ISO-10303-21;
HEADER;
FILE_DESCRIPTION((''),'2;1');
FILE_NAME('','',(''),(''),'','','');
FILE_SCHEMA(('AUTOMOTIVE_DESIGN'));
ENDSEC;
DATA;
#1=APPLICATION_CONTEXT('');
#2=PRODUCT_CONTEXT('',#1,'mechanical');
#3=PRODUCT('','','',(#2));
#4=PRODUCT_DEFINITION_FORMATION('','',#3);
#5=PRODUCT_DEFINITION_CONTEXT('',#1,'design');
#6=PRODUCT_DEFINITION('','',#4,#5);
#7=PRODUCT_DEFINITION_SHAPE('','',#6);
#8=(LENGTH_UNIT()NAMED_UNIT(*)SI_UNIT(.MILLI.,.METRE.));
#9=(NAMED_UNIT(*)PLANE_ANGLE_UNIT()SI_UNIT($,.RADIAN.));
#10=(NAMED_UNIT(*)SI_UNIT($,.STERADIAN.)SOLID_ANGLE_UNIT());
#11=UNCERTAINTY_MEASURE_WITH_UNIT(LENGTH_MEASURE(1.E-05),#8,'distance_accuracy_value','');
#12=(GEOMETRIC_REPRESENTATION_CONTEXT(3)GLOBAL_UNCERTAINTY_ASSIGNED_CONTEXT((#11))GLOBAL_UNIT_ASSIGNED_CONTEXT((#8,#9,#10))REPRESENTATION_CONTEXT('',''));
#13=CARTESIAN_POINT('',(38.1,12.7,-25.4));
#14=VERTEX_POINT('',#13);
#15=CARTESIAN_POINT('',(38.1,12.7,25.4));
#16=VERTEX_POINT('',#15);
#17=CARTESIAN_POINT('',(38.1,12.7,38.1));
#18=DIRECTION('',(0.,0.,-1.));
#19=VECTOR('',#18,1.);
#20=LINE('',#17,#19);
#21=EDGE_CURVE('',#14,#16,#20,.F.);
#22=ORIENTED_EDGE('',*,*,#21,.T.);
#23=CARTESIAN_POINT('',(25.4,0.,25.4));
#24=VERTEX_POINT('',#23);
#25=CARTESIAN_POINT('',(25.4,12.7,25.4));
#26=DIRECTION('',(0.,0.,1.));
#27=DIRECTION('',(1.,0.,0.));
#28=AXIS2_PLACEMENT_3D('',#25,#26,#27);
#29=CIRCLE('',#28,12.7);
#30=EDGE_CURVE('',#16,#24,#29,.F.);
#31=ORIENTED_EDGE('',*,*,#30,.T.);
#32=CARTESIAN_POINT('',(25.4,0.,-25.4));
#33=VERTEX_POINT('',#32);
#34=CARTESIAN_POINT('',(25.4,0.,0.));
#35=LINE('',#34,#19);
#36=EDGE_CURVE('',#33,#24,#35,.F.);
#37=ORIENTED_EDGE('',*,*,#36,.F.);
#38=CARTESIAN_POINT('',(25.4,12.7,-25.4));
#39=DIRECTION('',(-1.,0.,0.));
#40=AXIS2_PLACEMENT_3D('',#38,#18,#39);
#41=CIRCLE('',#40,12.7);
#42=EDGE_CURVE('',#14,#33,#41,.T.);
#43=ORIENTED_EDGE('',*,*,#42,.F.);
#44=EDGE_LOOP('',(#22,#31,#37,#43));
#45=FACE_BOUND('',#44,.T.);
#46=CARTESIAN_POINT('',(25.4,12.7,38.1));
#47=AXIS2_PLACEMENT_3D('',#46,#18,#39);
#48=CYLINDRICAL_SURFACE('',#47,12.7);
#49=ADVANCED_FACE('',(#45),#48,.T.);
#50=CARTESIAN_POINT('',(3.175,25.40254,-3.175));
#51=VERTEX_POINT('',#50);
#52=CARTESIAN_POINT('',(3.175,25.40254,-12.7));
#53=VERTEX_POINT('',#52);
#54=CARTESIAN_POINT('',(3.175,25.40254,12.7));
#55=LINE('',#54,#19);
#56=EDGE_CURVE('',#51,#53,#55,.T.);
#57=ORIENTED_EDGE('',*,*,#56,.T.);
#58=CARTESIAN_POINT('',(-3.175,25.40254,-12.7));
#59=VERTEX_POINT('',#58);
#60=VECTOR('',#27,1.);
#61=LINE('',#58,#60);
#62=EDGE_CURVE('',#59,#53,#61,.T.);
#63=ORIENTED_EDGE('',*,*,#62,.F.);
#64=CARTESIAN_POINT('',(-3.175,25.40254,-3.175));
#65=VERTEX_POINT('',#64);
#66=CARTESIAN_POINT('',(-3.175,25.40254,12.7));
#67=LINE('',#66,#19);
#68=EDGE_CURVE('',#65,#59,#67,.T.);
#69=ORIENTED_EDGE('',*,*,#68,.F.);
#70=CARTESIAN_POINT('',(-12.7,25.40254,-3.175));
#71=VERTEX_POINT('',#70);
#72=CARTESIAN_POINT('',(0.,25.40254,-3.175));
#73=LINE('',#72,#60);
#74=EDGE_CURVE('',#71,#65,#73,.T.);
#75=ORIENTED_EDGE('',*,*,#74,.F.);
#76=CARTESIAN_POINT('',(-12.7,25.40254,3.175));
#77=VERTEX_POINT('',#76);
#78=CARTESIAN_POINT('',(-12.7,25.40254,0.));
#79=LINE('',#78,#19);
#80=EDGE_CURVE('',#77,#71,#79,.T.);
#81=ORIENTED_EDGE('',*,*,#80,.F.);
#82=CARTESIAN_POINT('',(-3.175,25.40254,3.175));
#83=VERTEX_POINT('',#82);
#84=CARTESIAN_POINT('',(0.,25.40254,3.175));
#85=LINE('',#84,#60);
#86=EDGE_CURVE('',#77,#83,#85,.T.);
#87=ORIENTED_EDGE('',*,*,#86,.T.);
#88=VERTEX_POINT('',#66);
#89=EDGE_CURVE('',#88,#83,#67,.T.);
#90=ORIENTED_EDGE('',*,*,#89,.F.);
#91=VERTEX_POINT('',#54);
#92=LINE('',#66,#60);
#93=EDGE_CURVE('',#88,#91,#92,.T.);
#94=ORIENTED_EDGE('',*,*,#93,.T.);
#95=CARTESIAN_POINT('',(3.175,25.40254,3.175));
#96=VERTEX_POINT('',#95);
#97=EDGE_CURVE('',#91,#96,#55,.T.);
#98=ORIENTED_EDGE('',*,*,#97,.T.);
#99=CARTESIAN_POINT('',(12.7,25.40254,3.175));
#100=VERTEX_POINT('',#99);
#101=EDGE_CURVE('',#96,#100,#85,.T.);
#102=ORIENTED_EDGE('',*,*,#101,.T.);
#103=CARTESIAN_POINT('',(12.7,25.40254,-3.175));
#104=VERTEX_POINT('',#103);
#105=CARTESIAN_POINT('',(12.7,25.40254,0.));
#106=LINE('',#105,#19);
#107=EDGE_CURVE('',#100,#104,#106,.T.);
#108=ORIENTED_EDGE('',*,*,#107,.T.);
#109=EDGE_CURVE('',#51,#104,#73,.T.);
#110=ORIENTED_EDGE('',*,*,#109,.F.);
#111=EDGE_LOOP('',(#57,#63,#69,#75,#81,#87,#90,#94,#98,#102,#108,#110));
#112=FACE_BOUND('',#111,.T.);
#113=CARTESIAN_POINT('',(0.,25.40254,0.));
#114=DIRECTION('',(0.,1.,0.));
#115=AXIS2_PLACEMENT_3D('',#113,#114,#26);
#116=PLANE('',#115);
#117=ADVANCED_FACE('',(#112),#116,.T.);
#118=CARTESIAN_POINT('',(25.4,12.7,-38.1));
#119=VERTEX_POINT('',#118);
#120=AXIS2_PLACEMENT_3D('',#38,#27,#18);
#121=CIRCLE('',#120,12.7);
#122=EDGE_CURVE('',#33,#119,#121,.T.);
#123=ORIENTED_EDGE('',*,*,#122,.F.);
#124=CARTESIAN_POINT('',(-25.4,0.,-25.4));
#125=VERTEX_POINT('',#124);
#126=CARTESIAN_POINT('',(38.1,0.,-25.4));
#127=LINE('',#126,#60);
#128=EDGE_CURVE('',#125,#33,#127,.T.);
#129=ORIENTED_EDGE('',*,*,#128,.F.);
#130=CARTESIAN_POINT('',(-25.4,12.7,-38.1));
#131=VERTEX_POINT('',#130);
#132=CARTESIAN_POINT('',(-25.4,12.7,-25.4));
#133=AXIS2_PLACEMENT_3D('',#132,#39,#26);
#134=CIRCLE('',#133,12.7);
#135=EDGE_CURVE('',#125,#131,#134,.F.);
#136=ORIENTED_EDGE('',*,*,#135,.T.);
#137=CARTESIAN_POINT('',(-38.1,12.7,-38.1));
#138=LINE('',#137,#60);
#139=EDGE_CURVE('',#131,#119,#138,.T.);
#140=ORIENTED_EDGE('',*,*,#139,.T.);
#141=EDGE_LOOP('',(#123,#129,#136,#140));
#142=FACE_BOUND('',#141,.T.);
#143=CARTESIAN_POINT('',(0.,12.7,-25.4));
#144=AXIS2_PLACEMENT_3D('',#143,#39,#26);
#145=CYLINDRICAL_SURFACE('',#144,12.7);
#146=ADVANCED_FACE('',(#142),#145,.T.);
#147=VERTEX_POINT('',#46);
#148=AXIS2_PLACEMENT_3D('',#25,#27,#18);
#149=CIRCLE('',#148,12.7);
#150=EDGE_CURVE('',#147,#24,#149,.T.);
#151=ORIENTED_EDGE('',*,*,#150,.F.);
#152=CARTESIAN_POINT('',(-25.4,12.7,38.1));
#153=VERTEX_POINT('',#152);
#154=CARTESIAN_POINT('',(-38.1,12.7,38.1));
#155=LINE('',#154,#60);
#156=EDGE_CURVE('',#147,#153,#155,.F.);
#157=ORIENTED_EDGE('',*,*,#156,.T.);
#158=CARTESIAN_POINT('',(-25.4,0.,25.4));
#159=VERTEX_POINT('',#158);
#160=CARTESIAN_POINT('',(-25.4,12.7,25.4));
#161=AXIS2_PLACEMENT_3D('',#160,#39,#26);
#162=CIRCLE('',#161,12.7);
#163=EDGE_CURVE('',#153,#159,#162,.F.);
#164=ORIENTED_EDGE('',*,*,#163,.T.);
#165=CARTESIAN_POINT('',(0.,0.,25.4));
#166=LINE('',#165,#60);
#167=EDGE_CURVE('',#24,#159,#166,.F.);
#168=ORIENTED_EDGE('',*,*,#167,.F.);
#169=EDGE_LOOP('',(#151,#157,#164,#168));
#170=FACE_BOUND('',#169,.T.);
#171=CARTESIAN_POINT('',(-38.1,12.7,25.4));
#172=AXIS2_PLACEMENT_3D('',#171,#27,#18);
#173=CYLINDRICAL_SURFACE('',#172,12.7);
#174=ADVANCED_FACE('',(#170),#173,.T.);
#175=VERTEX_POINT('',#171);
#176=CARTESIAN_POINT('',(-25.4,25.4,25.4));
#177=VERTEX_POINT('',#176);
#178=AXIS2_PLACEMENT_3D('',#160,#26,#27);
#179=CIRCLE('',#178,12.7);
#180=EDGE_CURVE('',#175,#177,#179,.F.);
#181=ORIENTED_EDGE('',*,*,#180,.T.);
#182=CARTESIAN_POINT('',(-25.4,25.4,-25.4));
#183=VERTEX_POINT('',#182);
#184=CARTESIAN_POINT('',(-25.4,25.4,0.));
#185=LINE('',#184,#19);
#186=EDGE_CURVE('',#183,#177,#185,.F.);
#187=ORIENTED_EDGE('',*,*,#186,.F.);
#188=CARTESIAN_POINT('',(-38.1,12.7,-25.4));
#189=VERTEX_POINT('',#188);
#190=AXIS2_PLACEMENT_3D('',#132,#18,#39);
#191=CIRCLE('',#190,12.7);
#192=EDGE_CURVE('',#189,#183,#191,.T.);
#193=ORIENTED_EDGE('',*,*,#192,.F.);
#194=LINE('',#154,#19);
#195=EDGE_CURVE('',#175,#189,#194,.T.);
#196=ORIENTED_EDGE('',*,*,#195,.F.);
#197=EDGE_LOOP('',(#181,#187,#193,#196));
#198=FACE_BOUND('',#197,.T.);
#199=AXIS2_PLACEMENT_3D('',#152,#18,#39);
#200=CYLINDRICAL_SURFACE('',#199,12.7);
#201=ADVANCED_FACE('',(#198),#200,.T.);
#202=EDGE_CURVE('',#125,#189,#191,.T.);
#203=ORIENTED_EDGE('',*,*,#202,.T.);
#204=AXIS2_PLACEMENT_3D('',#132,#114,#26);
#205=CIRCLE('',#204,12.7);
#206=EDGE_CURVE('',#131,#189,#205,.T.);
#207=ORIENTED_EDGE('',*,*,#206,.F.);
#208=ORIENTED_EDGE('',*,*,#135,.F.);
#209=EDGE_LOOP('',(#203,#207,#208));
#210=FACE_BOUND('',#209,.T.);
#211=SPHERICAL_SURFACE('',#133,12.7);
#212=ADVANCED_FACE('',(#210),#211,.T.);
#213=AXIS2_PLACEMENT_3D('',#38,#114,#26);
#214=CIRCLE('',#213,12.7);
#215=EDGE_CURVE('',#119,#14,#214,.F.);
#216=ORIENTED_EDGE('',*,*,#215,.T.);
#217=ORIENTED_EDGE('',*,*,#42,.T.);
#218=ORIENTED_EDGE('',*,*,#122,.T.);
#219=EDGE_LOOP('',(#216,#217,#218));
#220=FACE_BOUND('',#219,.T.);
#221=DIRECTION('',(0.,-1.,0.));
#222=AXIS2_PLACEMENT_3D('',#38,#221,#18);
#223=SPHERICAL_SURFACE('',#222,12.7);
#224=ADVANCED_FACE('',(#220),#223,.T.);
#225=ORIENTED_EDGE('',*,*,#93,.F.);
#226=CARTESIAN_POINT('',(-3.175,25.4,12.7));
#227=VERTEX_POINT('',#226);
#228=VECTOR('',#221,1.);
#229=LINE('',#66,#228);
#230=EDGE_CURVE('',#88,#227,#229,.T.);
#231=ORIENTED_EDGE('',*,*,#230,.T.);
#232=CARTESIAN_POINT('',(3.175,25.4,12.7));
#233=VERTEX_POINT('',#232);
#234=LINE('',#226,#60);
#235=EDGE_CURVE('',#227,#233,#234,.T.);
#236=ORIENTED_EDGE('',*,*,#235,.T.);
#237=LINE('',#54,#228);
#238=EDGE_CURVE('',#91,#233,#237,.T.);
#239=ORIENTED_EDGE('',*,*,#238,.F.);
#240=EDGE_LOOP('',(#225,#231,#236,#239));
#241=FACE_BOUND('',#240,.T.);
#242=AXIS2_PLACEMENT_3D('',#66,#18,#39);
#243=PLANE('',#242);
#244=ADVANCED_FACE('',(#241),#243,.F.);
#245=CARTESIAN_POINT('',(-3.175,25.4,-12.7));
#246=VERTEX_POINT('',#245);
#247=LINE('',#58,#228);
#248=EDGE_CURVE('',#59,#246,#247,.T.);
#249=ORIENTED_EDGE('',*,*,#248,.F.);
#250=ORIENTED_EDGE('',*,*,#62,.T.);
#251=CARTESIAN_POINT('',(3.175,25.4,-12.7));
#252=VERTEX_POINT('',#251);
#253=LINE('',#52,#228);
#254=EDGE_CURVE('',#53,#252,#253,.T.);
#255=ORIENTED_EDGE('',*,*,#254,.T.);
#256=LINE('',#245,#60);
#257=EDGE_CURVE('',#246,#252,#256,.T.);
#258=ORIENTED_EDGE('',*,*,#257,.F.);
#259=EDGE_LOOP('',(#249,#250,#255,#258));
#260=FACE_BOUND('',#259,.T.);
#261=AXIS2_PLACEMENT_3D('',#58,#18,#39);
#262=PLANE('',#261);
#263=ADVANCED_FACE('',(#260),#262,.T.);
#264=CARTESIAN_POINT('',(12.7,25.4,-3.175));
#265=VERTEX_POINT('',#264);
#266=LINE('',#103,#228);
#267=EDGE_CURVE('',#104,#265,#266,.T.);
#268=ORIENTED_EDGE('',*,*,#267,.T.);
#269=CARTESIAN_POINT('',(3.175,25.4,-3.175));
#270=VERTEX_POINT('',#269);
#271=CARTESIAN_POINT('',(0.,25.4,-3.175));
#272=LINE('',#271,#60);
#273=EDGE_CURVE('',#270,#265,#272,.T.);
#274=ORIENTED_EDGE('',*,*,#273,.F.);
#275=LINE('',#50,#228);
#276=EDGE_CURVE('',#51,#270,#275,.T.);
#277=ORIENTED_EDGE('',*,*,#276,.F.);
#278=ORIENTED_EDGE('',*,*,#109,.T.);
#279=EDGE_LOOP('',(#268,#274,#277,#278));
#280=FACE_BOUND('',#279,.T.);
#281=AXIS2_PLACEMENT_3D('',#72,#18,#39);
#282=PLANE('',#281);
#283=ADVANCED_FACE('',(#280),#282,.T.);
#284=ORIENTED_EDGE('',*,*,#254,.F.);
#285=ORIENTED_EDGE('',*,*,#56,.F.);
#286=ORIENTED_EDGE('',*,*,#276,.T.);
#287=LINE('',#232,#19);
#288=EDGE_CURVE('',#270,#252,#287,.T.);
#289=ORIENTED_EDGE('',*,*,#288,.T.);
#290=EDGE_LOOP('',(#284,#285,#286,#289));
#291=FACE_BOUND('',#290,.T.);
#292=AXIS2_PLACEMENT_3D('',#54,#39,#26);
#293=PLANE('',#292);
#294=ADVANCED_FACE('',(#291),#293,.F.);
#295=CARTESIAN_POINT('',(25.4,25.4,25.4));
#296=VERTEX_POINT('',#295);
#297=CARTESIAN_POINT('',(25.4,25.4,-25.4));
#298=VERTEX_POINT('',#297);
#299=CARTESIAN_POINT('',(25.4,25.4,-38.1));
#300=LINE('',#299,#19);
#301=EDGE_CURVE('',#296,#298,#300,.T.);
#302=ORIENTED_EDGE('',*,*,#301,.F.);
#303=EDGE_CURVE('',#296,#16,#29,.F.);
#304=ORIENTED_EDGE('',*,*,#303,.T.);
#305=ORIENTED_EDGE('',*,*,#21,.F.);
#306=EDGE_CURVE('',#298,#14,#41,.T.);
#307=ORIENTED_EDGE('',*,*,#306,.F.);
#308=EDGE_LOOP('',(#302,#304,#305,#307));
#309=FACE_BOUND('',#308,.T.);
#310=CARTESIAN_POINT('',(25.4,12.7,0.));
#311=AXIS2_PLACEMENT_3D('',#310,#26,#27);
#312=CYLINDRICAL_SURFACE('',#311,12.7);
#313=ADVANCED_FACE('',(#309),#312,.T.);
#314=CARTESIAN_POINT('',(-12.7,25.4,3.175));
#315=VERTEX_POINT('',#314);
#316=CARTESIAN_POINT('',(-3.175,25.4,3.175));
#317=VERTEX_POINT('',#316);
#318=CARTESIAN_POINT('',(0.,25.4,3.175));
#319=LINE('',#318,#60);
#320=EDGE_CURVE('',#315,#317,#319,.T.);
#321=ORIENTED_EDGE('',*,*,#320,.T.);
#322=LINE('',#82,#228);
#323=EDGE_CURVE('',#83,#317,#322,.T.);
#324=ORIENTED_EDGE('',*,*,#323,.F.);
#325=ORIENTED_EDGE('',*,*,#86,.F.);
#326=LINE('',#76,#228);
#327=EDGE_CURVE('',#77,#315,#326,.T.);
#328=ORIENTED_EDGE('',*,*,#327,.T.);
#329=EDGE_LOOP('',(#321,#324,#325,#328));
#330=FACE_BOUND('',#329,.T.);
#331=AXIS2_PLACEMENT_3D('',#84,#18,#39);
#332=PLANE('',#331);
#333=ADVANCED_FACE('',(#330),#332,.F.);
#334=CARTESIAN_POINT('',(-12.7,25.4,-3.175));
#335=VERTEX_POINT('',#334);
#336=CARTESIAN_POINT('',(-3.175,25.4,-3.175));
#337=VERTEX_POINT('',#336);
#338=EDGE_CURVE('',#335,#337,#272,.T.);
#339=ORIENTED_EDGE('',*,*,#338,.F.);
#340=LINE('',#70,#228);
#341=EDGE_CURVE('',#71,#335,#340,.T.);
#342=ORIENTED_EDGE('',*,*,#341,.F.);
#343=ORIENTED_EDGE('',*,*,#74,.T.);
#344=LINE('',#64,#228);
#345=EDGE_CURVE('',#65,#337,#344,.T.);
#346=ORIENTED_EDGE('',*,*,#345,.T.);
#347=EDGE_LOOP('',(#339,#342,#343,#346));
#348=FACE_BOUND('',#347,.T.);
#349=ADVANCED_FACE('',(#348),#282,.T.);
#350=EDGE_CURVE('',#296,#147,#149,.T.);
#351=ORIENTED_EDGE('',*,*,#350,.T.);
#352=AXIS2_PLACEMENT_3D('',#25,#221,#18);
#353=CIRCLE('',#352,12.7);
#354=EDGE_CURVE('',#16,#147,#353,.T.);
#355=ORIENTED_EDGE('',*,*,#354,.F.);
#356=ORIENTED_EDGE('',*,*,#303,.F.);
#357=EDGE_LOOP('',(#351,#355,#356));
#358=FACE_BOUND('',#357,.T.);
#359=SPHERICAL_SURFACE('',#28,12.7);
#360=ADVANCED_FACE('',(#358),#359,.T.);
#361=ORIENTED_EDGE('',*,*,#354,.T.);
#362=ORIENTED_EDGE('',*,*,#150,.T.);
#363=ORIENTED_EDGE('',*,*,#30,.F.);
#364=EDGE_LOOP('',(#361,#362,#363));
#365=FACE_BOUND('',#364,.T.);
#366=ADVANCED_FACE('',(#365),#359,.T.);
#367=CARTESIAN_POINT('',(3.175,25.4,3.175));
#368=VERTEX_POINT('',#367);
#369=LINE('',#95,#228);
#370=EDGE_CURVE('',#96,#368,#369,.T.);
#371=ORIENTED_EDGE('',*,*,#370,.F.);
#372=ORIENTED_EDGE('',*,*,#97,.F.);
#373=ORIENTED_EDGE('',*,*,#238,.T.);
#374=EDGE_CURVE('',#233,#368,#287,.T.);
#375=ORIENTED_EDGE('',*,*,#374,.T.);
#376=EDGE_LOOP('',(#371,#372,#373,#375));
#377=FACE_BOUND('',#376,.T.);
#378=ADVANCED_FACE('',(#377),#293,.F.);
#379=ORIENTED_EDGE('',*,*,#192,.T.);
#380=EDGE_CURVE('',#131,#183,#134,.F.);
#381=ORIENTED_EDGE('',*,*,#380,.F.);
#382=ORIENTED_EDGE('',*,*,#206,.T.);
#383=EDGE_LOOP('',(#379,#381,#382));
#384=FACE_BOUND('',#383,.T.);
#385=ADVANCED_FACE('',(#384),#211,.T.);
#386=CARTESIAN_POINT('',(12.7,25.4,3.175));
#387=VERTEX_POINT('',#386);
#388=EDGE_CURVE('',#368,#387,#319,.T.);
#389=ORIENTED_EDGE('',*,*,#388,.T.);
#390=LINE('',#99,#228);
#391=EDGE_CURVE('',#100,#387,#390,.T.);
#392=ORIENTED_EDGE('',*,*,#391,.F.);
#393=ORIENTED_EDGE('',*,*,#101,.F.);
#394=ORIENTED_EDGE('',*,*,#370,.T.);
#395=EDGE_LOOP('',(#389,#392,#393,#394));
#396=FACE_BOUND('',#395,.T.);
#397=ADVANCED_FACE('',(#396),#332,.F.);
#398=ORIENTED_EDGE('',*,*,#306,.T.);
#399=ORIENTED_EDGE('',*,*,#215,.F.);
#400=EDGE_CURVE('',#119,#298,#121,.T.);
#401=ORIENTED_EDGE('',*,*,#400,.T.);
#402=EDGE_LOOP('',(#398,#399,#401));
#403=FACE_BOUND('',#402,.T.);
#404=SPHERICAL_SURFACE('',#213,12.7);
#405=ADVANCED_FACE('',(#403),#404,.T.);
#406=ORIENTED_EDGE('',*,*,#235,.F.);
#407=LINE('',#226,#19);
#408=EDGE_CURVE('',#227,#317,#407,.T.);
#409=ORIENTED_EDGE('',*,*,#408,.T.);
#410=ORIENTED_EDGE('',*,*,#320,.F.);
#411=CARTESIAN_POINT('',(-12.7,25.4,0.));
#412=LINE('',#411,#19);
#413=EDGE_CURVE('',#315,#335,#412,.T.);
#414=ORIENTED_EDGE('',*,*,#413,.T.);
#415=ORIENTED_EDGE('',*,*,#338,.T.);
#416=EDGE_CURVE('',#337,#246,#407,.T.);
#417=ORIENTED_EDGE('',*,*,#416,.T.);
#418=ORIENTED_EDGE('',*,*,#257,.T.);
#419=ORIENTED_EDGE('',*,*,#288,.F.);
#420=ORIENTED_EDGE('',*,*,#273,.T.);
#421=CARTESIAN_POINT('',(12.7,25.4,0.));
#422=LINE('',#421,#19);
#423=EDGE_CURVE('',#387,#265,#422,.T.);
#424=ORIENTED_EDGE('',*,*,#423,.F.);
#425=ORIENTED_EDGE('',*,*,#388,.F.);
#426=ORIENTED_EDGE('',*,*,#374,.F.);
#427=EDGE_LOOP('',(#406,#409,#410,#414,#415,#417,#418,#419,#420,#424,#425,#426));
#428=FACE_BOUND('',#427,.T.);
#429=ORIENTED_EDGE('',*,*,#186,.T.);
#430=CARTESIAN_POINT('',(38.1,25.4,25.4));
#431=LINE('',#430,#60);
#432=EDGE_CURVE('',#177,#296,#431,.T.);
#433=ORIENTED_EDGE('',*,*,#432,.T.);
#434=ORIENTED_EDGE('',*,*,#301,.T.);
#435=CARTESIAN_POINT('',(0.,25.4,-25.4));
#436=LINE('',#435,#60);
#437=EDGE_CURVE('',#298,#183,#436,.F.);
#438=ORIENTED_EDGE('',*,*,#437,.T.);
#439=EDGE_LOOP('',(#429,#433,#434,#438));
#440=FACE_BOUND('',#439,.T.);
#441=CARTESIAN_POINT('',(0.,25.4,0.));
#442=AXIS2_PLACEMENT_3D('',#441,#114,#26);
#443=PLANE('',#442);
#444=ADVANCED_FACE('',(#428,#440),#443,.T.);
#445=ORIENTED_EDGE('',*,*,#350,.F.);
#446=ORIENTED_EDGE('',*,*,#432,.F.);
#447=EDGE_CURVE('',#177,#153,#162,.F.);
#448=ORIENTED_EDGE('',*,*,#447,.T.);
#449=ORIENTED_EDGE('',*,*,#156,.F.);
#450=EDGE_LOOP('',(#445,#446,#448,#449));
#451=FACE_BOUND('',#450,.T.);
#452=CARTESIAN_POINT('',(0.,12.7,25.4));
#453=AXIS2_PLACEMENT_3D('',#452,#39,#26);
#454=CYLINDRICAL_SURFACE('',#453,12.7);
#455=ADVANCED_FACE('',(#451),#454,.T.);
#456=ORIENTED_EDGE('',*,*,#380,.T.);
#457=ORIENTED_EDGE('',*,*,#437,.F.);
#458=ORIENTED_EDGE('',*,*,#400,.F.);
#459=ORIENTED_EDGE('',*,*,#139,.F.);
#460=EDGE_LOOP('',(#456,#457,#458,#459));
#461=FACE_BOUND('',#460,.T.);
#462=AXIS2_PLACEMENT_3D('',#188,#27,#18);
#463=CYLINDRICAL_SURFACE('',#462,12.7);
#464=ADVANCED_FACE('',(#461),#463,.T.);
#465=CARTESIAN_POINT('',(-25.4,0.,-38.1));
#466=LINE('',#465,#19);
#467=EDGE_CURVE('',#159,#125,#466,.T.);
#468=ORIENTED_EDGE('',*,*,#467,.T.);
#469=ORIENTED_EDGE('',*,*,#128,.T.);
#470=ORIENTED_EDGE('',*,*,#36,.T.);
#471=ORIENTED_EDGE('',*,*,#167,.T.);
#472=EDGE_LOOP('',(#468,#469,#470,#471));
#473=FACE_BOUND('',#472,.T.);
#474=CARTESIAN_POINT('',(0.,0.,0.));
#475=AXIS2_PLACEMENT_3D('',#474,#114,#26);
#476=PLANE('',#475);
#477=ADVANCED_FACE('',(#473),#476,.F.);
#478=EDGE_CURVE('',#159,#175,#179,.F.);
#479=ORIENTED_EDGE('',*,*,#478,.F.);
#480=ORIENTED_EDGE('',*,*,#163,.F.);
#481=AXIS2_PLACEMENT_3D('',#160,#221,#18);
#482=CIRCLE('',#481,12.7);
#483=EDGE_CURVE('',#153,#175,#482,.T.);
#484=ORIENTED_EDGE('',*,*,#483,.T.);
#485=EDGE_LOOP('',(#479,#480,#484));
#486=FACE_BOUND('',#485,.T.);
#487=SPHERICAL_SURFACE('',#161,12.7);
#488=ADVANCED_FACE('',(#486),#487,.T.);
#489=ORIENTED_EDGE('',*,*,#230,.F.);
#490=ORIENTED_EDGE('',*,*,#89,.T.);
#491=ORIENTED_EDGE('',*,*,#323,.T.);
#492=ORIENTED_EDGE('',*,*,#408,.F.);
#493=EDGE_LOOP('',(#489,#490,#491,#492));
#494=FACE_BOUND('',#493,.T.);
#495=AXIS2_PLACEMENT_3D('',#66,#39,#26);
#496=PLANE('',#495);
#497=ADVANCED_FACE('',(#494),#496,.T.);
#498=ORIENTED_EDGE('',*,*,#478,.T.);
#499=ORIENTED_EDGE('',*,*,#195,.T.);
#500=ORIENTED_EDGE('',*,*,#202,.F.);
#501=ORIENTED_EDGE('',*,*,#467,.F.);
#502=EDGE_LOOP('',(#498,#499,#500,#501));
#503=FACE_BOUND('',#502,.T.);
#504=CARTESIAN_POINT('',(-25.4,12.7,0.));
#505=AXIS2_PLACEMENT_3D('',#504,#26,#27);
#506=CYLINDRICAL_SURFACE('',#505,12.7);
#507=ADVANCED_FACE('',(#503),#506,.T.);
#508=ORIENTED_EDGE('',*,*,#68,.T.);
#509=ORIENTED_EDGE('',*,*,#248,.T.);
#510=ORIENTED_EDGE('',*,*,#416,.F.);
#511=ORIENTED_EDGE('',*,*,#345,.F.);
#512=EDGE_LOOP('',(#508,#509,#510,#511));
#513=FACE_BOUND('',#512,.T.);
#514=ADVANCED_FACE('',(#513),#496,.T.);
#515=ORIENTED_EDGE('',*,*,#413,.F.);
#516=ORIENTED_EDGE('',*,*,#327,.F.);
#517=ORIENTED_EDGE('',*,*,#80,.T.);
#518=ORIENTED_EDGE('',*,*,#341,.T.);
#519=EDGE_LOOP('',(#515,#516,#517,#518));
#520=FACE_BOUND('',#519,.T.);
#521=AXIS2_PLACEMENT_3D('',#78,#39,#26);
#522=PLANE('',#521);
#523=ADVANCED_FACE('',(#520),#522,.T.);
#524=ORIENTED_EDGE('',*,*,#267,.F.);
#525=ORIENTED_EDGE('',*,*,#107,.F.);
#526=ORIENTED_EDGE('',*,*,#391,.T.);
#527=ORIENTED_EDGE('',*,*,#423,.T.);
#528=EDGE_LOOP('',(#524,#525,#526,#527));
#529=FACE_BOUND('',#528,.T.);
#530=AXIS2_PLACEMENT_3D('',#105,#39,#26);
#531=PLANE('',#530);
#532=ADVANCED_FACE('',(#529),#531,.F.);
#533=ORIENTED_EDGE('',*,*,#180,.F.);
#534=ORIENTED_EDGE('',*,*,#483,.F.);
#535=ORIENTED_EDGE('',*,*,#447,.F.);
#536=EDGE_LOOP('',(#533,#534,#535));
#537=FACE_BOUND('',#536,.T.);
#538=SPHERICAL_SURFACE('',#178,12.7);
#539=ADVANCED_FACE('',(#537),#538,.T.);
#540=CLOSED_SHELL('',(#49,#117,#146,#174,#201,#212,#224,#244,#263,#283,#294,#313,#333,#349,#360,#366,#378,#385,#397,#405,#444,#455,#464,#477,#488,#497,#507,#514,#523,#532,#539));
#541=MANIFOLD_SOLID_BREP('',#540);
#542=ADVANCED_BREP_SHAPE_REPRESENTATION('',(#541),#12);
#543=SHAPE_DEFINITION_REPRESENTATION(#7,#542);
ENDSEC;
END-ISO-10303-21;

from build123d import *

# Parameters (mm, degrees)
SKETCH1_W           = 76.2
SKETCH1_H           = 76.2
BOSS_EXTRUDE1_DEPTH = 25.4
FILLET1_R           = 12.7
SKETCH2_W           = 6.35
SKETCH2_H           = 25.4
SKETCH2_W_2         = 25.4
SKETCH2_H_2         = 6.35
BOSS_EXTRUDE2_DEPTH = 0.00254


with BuildPart() as part:
    # Sketch1 → Boss-Extrude1 (new body)
    with BuildSketch(Plane(origin=(0, 0, 0), x_dir=(1, 0, 0), z_dir=(0, 1, 0))):
        Rectangle(SKETCH1_W, SKETCH1_H)
    extrude(amount=BOSS_EXTRUDE1_DEPTH)

    # Fillet1
    fillet1_edges = [part.edges().sort_by_distance(p)[0] for p in [
        (0, 25.4, 38.1),
        (-38.1, 25.4, 0),
        (0, 25.4, -38.1),
        (-38.1, 0, 0),
        (0, 0, 38.1),
        (38.1, 0, 0),
        (0, 0, -38.1),
        (-38.1, 12.7, -38.1),
        (-38.1, 12.7, 38.1),
        (38.1, 12.7, 38.1),
        (38.1, 12.7, -38.1),
        (38.1, 25.4, 0),
    ]]
    fillet(fillet1_edges, radius=FILLET1_R - 0.0001)  # a hair under: the kernel refuses the full size

    # Sketch2 → Boss-Extrude2 (add)
    with BuildSketch(Plane(origin=(0, 25.4, 0), x_dir=(1, 0, 0), z_dir=(0, 1, 0))):
        Rectangle(SKETCH2_W, SKETCH2_H)
        Rectangle(SKETCH2_W_2, SKETCH2_H_2)
    extrude(amount=BOSS_EXTRUDE2_DEPTH)


solid = part.part
